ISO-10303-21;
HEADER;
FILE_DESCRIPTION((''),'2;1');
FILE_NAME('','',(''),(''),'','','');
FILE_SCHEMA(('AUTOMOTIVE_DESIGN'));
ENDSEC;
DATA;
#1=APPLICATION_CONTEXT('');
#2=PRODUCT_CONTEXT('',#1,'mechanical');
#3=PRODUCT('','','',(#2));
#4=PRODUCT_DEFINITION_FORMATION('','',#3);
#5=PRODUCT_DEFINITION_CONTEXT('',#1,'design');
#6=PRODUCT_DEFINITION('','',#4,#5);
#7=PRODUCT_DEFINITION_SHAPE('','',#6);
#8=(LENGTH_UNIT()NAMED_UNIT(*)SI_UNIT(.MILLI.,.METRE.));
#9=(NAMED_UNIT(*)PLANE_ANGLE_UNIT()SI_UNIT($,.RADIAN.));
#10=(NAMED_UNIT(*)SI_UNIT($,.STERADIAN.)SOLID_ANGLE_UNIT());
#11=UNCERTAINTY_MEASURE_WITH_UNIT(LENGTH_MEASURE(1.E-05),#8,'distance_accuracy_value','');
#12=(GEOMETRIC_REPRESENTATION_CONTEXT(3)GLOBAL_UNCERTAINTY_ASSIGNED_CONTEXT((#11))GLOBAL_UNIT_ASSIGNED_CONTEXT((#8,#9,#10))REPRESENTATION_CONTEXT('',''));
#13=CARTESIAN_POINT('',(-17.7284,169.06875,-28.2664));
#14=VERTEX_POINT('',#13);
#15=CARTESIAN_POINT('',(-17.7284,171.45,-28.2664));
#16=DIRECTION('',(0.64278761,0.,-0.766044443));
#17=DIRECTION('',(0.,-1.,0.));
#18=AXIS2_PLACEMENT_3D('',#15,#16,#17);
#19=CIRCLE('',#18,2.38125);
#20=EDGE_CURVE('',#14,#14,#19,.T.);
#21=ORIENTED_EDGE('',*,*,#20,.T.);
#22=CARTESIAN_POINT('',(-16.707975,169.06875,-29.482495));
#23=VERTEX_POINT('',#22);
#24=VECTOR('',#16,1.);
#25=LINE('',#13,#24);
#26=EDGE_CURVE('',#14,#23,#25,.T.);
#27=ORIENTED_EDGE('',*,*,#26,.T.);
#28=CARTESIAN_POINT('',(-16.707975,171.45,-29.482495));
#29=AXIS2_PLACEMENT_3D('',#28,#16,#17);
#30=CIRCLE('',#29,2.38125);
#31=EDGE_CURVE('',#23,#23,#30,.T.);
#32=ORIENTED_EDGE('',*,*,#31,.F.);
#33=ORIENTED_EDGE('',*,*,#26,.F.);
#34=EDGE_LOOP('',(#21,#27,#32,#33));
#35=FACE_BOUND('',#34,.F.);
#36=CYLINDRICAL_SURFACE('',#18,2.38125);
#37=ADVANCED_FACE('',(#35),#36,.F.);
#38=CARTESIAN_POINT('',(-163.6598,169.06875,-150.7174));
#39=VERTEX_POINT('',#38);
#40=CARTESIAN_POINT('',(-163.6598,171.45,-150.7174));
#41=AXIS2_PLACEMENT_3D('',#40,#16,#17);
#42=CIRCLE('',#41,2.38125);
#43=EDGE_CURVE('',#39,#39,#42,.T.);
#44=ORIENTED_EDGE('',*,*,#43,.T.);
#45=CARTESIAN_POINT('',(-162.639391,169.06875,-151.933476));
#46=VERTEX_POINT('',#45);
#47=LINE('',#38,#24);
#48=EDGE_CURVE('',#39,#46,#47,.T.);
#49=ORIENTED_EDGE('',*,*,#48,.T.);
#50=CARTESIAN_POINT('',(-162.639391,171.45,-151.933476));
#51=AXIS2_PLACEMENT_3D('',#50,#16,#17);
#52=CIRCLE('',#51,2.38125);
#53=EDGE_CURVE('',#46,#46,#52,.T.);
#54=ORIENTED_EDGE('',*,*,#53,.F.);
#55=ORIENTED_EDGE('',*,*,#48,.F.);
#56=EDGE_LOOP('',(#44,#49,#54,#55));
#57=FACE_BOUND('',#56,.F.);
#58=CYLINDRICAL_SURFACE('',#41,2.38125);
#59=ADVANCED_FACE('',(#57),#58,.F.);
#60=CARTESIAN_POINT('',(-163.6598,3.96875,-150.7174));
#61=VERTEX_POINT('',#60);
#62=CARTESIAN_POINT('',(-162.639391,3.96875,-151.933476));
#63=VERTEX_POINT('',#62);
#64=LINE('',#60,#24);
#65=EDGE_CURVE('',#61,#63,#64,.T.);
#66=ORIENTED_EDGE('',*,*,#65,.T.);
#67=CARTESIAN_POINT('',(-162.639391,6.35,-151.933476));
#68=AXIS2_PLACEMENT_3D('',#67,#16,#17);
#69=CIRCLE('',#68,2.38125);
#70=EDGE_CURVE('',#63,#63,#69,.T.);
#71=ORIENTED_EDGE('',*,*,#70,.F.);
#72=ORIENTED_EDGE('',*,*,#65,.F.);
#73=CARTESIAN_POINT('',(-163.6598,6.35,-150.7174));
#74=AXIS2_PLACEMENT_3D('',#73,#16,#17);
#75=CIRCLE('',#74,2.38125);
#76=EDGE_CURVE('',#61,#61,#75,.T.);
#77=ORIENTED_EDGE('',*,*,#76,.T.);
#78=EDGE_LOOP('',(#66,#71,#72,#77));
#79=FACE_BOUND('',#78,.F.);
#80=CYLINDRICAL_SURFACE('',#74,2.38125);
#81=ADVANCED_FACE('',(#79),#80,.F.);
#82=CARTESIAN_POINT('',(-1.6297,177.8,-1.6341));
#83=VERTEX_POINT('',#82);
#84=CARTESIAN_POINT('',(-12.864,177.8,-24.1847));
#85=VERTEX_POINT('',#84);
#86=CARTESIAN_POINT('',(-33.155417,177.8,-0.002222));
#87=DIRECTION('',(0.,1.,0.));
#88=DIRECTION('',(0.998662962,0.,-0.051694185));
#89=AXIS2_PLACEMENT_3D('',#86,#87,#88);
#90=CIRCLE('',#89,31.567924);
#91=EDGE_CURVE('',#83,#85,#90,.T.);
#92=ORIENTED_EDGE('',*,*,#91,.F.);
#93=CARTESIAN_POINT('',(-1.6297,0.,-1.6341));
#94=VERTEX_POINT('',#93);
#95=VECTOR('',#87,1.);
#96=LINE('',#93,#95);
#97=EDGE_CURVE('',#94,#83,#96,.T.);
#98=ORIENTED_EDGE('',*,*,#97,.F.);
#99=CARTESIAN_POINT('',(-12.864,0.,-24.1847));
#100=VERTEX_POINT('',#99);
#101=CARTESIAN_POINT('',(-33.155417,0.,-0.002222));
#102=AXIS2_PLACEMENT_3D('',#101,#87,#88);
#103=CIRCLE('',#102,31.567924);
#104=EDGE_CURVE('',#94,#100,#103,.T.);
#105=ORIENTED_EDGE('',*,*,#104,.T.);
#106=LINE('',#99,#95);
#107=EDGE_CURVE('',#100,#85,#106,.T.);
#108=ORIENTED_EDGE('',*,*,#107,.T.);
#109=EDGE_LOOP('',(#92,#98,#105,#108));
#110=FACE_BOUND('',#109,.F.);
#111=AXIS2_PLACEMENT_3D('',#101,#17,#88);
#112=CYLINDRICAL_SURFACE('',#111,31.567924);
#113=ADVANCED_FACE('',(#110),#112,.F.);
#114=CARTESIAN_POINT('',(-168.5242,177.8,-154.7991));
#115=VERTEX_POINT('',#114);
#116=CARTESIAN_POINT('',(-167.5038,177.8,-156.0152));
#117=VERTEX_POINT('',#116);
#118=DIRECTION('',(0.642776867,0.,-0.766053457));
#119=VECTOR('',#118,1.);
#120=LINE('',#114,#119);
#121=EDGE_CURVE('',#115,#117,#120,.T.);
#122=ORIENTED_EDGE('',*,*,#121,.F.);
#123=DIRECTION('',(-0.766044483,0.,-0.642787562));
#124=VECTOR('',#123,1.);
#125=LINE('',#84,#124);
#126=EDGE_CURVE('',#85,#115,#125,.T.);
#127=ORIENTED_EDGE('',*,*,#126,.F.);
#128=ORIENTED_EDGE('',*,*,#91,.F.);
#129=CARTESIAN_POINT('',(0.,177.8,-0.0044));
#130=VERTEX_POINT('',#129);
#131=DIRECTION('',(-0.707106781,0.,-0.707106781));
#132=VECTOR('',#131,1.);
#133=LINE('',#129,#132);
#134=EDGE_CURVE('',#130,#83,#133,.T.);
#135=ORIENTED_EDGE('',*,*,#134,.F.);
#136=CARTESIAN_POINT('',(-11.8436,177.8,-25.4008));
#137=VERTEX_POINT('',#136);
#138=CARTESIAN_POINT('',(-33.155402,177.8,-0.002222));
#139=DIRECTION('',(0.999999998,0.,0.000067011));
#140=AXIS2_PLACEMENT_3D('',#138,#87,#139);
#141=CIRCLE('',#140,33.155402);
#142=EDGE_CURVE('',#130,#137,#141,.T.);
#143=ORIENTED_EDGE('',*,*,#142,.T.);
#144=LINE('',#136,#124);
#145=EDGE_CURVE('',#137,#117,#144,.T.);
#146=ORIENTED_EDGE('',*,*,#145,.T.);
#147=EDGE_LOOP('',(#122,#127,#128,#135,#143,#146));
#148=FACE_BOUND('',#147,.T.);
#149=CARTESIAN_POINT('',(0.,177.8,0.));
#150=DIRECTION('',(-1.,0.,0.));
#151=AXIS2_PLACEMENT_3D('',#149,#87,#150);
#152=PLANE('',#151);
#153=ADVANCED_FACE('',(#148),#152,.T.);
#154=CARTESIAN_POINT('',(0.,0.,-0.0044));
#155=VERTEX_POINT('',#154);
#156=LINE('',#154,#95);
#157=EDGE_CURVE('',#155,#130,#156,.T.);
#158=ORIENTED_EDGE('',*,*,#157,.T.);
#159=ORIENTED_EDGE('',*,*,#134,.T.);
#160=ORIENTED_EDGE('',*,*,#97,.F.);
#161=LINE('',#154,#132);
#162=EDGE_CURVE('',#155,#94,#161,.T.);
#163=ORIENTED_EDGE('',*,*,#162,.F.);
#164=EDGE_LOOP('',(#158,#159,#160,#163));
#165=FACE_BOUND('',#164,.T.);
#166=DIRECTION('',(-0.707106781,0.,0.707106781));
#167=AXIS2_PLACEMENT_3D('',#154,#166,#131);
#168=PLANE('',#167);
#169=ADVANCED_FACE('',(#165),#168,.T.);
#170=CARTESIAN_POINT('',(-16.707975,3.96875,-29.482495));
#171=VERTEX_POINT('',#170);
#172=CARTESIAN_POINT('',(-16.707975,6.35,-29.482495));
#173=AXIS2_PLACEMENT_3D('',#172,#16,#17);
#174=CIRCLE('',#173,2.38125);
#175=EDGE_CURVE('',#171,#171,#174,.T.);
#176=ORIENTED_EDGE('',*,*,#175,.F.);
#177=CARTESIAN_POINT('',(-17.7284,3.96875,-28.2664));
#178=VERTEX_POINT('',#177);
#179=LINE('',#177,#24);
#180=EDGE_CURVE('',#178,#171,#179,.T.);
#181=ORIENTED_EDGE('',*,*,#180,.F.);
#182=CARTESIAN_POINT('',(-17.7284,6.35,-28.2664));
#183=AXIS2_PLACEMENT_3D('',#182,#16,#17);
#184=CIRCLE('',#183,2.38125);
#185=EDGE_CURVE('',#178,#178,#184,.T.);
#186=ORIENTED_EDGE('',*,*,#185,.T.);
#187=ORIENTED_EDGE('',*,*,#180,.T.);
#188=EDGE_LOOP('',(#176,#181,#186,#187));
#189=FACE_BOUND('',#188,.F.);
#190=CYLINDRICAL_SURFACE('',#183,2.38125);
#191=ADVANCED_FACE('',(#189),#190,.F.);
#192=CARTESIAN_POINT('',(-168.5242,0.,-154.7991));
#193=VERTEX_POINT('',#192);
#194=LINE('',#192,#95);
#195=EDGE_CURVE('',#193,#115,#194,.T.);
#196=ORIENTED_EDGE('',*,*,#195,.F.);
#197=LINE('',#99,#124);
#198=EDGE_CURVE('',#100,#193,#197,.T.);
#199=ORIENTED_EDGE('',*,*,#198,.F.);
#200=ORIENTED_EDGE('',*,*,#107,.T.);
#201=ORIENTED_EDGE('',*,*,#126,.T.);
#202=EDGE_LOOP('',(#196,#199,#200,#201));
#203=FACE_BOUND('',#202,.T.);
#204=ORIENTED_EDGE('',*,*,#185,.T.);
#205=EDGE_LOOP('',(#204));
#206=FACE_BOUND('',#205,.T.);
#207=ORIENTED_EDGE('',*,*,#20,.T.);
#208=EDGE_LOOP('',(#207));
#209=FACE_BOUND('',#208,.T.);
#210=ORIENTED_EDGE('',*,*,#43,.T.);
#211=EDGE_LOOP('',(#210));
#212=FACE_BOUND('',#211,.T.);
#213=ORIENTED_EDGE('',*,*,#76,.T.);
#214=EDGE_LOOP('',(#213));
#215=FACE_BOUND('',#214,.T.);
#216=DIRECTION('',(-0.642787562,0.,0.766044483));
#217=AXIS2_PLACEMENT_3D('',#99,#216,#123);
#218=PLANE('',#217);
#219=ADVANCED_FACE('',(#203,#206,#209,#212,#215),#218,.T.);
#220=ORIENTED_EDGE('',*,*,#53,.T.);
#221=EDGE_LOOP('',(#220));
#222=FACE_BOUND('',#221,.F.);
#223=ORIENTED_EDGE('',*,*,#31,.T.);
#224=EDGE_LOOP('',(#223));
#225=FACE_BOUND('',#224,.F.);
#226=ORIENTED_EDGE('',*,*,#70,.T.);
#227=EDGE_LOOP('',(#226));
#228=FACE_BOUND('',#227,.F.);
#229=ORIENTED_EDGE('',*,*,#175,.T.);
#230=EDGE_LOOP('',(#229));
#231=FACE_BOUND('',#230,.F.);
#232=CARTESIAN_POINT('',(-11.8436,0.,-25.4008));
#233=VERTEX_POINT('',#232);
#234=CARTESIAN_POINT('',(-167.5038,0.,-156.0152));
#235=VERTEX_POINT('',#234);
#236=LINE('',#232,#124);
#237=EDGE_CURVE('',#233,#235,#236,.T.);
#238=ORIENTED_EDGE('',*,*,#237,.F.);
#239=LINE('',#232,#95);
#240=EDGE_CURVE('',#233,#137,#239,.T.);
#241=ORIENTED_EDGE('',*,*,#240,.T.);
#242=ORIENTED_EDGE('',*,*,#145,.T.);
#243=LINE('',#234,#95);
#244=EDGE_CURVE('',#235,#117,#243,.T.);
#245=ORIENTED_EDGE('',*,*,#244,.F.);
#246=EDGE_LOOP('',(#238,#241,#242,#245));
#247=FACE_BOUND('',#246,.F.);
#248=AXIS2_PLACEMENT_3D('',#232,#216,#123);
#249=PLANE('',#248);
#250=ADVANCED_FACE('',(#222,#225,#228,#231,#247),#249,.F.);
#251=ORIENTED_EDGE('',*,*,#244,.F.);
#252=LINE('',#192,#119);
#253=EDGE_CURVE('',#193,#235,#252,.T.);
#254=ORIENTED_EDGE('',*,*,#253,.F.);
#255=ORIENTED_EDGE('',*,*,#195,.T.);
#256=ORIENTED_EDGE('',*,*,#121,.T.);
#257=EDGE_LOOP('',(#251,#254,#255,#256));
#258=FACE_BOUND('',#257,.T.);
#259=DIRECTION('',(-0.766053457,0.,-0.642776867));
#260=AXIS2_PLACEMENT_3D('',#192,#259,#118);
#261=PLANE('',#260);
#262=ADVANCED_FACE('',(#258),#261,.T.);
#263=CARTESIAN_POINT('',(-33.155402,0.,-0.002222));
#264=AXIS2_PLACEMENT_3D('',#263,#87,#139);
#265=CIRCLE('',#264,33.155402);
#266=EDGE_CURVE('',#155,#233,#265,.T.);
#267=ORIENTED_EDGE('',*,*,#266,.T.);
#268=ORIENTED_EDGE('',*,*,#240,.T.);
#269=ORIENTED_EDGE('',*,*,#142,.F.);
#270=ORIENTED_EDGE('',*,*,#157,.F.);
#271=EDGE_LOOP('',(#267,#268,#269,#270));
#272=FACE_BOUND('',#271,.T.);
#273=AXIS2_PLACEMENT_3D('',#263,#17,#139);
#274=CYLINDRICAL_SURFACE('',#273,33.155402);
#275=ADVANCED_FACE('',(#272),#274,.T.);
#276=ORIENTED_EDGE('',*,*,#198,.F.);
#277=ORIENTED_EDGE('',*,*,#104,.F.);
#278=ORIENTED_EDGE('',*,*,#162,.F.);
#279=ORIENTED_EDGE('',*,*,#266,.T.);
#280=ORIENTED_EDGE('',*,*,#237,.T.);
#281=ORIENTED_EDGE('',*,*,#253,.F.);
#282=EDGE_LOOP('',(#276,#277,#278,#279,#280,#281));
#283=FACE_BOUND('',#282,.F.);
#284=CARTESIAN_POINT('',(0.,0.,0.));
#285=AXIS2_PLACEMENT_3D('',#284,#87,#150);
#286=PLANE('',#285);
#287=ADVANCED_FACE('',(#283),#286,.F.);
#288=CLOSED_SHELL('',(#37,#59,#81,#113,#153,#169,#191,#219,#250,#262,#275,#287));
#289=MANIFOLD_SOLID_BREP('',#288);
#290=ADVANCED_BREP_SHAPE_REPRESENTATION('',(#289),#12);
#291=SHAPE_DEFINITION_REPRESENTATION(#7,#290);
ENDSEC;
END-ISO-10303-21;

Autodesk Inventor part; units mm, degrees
ref_plane "YZ Plane" through (0, 0, 0) normal (1, 0, 0) x (0, 1, 0)
ref_plane "XZ Plane" through (0, 0, 0) normal (0, 1, 0) x (-1, 0, 0)
ref_plane "XY Plane" through (0, 0, 0) normal (0, 0, 1) x (1, 0, 0)
sketch "Sketch1" plane through (0, 0, 0) normal (0, 1, 0) x (-1, 0, 0)
  line L0 (131.6241, -133.8819) -> (133.2116, -133.8819)
  arc A0 (0, 0) -> (11.8436, -25.4008) centre (33.1555, -0.0022) ccw
  line L1 (11.8436, -25.4008) -> (167.5038, -156.0152)
  arc A1 (1.5875, 0) -> (1.5875, -0.0044) centre (33.1555, -0.0022) ccw
  line L2 (12.864, -24.1847) -> (168.5242, -154.7991)
  line L3 (168.5242, -154.7991) -> (167.5038, -156.0152)
  line L4 (0, -0.0044) -> (1.6297, -1.6341)
  arc A2 (1.6297, -1.6341) -> (12.864, -24.1847) centre (33.1555, -0.0022) ccw
  dimension "d15" = 1.5875
extrude "Extrusion1" add sketch "Sketch1" along normal blind 177.8
sketch "Sketch2" plane through (-12.864, 0, -24.1847) normal (-0.6427876, 0, 0.7660444) x (0.7660444, 0, 0.6427876)
  line L0 (0, 0) -> (0, 177.8) projected
  line L1 (-203.2, 0) -> (-185.2395, 0) construction
  line L2 (0, 165.1) -> (17.9605, 165.1) construction
  line L3 (-203.2, 165.1) -> (-185.2395, 165.1) construction
  point P0 (25.4, 0)
  point P1 (-6.35, 6.35)
  point P2 (-196.85, 6.35)
  point P3 (-203.2, 177.8)
  point P4 (-6.35, 171.45)
  point P5 (-196.85, 171.45)
hole "Hole1" at (-163.6598, 6.35, -150.7174) at (-163.6598, 171.45, -150.7174) at (-17.7284, 171.45, -28.2664) at (-17.7284, 6.35, -28.2664) direction (0.6427876, 0, -0.7660444) diameter 4.7625 end through all
properties part number "intakeabs" material "Polyethylene, High Density"
